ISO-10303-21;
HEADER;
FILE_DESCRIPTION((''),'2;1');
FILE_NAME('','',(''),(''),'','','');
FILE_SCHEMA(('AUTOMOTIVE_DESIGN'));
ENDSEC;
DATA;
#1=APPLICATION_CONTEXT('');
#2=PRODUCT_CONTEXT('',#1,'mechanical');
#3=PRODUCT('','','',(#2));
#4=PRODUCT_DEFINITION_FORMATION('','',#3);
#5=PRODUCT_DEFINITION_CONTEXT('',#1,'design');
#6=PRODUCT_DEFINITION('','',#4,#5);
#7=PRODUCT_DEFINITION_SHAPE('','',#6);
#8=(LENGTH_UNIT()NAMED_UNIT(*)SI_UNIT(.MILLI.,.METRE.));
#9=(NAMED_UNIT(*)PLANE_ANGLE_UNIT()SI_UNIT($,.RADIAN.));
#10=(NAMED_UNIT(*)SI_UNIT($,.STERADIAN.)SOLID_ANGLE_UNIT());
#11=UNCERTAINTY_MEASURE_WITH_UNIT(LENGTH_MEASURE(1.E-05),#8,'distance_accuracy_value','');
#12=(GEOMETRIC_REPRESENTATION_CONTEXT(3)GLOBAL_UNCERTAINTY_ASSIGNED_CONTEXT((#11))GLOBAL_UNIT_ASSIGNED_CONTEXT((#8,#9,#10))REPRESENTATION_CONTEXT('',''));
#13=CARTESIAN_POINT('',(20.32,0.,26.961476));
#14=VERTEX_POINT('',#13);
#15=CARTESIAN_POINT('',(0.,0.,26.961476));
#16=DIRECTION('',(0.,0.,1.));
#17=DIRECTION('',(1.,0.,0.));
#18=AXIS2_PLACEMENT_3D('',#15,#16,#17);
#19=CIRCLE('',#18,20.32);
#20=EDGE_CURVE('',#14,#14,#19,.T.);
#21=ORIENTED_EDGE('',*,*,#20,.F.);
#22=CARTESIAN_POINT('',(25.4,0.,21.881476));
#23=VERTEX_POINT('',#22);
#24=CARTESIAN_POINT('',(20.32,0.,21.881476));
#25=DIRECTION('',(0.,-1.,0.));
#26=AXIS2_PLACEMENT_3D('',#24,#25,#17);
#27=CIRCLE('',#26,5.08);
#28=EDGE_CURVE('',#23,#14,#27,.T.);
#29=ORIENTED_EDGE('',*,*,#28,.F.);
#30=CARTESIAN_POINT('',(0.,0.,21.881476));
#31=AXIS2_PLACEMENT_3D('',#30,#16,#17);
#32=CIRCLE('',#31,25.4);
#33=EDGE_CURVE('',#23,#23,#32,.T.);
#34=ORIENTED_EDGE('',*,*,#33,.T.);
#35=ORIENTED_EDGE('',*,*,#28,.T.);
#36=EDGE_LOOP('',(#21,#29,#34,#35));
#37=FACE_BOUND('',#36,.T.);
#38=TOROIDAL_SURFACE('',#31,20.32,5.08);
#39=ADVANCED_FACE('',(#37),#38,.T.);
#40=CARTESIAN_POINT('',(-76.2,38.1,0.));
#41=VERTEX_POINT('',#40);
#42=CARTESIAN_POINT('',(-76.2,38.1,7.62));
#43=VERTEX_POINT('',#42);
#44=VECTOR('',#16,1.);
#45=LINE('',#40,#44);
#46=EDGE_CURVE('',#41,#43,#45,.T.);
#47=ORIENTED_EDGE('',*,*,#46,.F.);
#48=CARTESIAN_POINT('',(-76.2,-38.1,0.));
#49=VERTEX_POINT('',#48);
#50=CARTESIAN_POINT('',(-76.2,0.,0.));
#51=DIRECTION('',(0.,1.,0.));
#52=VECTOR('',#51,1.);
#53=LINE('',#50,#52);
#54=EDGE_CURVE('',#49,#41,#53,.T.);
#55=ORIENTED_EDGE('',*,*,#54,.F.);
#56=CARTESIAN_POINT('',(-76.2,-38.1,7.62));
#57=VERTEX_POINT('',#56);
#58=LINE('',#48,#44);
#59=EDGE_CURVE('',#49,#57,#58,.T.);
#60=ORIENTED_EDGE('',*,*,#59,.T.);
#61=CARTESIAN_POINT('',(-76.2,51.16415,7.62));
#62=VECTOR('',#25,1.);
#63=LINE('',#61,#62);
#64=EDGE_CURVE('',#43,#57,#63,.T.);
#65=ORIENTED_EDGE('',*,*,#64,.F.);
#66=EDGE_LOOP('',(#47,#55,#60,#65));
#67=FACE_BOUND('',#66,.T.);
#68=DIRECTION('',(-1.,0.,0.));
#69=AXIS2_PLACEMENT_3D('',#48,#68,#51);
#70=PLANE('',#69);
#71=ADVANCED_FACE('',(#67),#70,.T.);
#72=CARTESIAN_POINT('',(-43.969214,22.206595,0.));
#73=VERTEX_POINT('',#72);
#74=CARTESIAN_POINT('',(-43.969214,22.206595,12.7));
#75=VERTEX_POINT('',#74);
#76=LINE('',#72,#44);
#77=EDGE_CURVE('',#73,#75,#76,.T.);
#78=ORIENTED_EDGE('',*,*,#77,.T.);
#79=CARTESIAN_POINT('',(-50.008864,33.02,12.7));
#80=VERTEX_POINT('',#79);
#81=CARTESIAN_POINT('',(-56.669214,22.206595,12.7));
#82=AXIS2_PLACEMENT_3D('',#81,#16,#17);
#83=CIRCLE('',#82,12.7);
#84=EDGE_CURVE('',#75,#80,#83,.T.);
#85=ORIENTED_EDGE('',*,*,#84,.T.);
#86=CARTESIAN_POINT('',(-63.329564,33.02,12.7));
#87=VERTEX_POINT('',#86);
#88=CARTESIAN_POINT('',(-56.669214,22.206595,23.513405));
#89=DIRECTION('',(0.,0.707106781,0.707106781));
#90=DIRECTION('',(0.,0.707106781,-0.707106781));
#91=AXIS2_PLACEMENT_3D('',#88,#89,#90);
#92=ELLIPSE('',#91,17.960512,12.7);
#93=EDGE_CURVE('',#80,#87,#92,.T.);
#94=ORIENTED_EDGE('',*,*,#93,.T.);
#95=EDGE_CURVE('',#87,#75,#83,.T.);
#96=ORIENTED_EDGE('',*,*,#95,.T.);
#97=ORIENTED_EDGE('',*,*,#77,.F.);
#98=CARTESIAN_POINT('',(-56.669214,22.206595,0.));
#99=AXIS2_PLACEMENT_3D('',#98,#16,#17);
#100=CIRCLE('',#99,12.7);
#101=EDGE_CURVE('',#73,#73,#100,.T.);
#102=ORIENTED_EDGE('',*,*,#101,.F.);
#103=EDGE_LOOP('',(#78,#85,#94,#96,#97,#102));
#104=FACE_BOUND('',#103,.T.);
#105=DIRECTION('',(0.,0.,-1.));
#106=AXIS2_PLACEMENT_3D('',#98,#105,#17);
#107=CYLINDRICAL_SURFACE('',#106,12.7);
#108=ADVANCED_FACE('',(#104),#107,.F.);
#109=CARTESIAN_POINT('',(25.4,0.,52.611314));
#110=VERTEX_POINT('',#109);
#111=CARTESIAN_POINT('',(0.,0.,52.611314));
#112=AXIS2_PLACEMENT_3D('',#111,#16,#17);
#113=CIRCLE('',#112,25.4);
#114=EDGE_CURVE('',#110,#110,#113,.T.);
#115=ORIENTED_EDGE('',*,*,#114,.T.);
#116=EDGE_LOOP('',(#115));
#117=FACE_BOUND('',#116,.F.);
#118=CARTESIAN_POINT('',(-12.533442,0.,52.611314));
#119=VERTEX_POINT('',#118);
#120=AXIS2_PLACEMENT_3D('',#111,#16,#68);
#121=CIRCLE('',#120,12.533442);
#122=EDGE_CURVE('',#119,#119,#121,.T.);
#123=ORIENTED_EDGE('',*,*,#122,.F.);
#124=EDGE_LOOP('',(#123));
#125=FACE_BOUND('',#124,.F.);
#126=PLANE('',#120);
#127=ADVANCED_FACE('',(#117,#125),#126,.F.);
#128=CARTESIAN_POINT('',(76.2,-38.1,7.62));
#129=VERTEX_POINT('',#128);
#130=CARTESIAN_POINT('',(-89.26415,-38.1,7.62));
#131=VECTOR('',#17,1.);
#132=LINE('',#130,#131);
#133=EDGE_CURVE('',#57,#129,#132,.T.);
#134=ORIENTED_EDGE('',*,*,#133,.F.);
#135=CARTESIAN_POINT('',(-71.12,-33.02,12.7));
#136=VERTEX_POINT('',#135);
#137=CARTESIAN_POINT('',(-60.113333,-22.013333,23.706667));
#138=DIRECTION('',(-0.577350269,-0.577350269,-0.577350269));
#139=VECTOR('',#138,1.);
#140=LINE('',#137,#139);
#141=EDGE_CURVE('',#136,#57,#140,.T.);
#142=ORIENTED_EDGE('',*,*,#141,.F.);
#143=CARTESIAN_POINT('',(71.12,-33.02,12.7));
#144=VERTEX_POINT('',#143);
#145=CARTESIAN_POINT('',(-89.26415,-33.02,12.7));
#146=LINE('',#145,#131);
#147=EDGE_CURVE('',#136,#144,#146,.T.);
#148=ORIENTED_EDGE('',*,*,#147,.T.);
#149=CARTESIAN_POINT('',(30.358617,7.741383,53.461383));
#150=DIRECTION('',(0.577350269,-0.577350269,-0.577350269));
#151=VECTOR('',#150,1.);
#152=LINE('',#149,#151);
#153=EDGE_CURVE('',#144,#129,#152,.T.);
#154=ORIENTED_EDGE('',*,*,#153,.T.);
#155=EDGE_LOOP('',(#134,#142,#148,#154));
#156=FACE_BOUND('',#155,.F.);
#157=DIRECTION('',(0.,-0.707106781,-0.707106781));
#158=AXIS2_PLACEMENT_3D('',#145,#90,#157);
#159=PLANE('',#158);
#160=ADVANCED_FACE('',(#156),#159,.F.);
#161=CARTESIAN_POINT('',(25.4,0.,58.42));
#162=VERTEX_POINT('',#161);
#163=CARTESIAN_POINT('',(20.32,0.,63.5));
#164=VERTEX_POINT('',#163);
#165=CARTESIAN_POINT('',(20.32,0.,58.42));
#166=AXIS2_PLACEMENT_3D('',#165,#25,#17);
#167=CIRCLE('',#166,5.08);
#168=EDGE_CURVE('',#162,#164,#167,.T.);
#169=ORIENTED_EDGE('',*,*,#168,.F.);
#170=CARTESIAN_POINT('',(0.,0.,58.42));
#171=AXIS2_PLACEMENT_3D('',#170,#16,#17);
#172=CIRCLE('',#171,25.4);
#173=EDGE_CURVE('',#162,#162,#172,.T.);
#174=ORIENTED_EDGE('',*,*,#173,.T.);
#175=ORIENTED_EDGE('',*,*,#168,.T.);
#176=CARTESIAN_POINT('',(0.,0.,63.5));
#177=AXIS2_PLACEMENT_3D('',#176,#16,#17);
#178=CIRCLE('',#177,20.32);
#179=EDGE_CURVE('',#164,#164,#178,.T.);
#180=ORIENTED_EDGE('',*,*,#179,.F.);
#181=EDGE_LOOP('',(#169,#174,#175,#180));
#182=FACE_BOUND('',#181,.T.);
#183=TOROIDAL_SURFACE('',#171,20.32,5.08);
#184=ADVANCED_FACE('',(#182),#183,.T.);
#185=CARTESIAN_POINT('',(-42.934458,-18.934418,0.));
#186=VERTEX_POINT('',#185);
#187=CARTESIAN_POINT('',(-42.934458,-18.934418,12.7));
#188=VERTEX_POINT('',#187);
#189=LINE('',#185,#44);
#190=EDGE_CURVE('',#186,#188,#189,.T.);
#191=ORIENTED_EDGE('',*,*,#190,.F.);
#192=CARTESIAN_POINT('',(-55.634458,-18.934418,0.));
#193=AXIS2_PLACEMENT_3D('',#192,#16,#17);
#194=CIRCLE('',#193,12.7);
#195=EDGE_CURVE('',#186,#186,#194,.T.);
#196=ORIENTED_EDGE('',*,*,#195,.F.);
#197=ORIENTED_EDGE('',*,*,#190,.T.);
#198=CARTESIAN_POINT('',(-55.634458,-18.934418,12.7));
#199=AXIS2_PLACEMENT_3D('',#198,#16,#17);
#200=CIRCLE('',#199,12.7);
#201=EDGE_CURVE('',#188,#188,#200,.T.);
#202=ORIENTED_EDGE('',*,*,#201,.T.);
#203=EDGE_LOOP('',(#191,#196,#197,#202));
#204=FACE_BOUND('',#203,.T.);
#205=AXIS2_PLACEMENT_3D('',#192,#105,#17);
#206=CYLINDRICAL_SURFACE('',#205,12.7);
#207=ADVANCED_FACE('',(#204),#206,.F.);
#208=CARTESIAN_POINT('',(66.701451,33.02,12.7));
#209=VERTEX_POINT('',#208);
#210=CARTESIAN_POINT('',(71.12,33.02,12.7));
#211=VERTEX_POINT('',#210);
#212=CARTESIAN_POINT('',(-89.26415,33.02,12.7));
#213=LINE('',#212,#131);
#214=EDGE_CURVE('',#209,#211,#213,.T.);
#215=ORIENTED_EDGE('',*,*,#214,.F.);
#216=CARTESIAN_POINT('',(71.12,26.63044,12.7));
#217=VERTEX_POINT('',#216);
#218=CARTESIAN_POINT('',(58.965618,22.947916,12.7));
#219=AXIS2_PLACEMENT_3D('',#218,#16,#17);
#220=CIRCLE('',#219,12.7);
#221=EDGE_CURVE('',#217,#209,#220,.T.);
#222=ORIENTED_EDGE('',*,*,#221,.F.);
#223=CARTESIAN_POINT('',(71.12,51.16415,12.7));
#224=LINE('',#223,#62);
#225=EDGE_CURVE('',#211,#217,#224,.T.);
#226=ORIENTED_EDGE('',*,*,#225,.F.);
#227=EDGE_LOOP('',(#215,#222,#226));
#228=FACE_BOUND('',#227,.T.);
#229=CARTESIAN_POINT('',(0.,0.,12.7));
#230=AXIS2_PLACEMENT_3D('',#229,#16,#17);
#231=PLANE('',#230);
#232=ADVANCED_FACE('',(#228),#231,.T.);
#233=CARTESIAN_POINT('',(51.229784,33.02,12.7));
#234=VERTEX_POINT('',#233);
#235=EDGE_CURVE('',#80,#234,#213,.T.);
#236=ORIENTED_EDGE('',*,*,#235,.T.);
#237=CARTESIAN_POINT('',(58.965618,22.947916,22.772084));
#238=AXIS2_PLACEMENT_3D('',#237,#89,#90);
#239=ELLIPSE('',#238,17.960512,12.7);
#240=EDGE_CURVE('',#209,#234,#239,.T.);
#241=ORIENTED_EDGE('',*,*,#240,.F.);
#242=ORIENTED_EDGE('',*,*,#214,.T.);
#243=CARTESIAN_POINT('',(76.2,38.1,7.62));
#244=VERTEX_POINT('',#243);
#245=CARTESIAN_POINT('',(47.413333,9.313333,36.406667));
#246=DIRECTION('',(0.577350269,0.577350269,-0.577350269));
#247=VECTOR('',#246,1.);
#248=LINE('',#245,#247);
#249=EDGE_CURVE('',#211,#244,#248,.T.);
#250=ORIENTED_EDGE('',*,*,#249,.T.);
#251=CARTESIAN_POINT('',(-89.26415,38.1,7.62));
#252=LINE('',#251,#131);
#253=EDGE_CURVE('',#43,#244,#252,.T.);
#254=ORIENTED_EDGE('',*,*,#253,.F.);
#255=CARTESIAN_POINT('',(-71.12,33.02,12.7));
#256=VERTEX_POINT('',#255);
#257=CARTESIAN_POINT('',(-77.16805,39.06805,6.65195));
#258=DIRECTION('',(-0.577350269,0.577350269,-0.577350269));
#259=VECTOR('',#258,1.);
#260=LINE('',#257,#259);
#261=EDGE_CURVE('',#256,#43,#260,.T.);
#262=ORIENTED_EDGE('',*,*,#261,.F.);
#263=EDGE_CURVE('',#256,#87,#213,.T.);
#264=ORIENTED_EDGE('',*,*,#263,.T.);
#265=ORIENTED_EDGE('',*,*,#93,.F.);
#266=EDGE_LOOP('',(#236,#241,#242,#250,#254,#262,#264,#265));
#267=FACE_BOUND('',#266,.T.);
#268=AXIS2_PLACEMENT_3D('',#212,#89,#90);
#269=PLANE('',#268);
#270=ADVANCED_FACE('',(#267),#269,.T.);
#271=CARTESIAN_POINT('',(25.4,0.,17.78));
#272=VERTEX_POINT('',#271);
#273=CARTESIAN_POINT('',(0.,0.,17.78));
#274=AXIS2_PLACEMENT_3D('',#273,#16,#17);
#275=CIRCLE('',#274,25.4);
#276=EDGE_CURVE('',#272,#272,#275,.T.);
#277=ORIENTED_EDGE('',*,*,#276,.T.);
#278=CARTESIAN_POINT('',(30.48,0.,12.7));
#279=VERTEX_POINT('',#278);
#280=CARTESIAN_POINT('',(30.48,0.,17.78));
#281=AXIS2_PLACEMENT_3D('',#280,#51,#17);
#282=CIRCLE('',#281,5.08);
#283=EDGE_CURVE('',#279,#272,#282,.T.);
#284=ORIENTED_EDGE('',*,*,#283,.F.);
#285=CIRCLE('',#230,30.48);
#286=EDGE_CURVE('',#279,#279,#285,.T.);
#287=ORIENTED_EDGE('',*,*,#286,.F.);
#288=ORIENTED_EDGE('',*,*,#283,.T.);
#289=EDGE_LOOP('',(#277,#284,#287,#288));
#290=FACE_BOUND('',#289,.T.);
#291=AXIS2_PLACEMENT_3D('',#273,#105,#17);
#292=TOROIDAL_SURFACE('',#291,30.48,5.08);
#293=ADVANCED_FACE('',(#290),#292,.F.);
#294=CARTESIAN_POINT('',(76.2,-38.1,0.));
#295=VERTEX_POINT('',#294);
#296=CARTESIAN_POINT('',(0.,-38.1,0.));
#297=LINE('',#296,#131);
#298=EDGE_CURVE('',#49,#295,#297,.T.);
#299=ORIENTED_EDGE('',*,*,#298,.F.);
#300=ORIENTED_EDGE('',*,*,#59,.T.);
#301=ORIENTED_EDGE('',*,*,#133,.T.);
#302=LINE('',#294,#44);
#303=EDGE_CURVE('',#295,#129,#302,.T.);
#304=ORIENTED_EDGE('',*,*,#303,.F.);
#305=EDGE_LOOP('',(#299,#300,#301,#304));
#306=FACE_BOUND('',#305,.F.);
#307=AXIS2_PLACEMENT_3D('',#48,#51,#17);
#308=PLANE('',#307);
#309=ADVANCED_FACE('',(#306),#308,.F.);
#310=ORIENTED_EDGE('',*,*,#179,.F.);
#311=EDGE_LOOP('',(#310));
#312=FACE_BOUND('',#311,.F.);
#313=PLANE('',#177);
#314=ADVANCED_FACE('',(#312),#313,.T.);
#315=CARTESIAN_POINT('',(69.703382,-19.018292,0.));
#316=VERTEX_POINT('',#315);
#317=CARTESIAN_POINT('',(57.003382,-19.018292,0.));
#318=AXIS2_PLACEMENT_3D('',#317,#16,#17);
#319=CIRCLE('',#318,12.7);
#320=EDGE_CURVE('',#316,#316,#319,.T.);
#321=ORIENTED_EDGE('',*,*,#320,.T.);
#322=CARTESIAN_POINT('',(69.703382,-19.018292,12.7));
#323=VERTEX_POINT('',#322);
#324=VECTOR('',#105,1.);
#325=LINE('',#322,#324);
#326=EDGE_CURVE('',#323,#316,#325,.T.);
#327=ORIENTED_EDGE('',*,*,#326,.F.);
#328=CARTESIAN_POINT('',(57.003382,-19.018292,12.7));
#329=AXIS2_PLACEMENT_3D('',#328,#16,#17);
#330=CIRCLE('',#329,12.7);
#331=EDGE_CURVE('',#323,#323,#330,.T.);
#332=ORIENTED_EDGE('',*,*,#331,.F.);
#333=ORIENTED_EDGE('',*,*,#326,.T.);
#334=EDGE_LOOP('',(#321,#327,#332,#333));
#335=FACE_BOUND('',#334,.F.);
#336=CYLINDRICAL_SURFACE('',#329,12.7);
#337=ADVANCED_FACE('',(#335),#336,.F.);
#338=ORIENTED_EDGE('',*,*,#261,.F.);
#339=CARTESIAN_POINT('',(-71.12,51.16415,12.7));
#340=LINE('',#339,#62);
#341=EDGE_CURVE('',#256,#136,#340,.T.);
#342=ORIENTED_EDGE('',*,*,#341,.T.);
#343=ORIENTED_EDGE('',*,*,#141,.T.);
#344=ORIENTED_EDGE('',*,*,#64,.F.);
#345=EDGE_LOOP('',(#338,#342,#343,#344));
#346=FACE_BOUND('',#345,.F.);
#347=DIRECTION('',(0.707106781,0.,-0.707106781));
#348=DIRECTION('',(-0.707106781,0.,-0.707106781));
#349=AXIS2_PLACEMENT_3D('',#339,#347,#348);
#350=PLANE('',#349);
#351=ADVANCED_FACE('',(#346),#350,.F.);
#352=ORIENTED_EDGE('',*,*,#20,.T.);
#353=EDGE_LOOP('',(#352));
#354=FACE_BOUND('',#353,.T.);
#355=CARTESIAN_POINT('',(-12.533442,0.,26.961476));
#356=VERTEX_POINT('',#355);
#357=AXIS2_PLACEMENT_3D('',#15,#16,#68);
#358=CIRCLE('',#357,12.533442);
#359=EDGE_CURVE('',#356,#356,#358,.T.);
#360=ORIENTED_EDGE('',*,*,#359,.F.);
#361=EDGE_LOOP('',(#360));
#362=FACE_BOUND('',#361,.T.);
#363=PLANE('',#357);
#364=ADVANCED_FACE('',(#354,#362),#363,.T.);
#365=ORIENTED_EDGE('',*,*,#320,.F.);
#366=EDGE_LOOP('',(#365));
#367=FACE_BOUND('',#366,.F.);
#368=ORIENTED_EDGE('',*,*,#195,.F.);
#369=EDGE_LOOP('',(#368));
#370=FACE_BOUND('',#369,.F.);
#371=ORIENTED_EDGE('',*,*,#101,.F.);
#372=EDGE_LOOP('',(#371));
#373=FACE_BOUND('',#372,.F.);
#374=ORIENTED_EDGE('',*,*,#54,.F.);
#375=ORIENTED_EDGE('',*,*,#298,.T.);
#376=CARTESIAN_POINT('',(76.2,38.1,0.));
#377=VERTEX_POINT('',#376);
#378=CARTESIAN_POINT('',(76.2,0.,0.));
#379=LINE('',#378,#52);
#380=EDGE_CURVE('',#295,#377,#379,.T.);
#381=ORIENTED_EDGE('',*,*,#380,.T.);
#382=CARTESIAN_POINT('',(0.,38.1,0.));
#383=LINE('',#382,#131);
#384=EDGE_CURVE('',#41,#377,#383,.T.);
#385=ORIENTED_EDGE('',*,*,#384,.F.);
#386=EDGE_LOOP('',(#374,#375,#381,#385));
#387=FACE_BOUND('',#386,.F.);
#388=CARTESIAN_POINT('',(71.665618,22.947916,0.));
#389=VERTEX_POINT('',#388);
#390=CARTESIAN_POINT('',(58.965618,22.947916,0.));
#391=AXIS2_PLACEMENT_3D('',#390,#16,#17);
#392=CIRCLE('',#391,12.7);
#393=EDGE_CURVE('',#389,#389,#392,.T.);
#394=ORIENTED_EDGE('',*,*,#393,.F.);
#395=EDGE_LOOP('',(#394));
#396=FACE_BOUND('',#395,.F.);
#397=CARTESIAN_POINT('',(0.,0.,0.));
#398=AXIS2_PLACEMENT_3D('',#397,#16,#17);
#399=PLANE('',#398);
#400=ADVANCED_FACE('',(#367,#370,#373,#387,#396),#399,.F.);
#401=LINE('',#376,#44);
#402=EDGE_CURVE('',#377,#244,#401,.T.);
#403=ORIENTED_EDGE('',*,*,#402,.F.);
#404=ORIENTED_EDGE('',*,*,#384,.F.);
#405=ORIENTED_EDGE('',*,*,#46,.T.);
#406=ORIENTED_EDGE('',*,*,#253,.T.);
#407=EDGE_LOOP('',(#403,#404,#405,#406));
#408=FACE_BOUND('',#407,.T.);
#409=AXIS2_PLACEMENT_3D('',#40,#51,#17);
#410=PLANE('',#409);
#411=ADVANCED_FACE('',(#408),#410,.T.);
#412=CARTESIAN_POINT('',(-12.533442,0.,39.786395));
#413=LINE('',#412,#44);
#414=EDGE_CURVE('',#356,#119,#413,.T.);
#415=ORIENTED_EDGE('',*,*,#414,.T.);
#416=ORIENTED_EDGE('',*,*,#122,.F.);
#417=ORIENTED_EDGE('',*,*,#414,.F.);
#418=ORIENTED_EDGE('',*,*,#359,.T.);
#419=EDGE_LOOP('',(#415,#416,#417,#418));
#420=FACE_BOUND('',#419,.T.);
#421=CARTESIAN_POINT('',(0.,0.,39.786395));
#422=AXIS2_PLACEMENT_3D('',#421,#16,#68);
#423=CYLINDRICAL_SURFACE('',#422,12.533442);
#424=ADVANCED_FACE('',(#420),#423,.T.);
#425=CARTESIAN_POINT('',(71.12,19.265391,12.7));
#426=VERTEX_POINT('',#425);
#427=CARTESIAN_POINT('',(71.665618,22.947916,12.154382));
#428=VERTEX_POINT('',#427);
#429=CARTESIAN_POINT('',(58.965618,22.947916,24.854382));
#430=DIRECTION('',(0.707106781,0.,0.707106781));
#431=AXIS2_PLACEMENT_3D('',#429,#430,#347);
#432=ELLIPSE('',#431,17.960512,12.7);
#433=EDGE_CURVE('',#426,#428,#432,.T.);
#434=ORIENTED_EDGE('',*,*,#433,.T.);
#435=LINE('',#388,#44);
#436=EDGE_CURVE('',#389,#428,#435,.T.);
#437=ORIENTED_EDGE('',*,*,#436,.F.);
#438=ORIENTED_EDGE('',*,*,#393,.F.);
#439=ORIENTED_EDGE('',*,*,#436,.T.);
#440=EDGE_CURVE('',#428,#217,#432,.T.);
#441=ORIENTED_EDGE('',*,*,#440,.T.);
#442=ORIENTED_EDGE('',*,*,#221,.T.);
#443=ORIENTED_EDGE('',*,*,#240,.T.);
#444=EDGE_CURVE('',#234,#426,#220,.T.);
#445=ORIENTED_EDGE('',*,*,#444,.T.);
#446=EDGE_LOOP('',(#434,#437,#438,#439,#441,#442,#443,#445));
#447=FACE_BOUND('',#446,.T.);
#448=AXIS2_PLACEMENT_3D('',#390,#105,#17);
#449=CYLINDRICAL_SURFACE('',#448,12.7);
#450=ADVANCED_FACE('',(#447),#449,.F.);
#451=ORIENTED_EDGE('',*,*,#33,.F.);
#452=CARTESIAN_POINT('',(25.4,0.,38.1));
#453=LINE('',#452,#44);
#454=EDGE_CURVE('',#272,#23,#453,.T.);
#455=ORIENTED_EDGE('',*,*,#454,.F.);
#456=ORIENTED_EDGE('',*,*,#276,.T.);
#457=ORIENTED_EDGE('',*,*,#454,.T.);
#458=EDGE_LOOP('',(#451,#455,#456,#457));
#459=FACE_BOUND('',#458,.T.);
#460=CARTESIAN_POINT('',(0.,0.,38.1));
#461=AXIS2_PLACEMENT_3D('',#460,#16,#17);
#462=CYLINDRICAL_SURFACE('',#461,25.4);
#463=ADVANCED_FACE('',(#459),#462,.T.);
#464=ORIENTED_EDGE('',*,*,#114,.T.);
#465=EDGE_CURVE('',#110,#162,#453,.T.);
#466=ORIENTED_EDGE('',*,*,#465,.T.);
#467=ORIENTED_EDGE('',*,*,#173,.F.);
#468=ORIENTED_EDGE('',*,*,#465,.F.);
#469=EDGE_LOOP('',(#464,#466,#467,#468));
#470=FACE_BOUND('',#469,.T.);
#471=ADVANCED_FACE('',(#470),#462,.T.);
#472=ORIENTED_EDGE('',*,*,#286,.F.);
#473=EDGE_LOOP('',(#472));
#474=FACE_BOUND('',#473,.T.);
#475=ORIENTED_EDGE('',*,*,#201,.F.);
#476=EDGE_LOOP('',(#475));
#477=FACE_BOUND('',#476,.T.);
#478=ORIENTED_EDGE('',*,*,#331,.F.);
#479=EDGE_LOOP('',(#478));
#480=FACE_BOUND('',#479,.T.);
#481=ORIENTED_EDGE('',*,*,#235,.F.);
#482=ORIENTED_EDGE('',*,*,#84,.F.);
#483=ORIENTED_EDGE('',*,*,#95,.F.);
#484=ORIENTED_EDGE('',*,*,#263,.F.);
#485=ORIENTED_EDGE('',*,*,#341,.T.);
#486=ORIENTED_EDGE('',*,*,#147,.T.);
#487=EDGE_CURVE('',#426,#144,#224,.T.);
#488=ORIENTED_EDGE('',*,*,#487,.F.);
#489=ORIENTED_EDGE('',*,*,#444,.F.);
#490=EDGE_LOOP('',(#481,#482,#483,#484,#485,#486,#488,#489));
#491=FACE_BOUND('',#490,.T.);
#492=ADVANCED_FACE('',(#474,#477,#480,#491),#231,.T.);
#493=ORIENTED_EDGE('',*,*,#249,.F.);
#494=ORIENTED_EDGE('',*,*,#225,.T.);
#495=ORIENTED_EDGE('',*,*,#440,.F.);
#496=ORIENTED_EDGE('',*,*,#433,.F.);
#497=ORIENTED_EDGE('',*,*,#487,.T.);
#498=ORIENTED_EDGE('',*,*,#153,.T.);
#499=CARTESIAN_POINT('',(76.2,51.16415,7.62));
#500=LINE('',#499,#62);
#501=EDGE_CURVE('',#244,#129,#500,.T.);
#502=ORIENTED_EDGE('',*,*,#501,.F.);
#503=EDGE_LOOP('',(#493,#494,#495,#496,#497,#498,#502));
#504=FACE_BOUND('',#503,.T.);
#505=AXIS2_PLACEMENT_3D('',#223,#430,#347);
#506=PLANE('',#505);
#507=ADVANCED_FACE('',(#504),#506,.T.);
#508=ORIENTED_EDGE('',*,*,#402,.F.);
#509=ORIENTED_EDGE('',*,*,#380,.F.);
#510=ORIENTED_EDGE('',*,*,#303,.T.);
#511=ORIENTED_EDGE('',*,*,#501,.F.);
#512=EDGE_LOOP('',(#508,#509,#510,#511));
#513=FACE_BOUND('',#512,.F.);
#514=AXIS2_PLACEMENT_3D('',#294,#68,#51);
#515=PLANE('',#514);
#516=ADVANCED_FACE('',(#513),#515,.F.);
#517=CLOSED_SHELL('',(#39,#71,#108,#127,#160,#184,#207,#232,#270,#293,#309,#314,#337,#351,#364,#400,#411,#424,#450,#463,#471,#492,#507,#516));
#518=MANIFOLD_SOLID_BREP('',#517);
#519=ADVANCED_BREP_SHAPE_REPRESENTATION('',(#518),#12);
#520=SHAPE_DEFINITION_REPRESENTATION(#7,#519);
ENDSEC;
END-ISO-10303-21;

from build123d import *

# Parameters (mm, degrees)
F0_W         = 152.4
F0_H         = 76.2
F1_DEPTH     = 12.7
F2_R         = 12.7
F3_DEPTH     = 12.7
F4_R         = 12.7
F5_DEPTH     = 12.7
F6_R         = 12.7
F7_DEPTH     = 12.7
F8_W         = 25.4
F8_H         = 50.8
F11_W        = 22.735084407
F11_H        = 25.6498381495
F13_R        = 5.08
F14_T1_DEPTH = 178.5282991577
F14_T3_DEPTH = 102.3282991577


# Not quite as in the source:
# - a fillet or chamfer that OpenCascade refuses, or shapes differently, is made with other operations: its cross-section is extruded or revolved along the edge and cut away or added


with BuildPart() as f1:
    # F0 (on Top) → F1 (new body)
    with BuildSketch(Plane.XY):
        Rectangle(F0_W, F0_H)
    extrude(amount=F1_DEPTH)

    # F2 (on face) → F3 (cut)
    with BuildSketch(Plane.XY.offset(12.7)):
        with Locations((57.0033815651, -19.0182915657)):
            Circle(F2_R)
    extrude(amount=-F3_DEPTH, mode=Mode.SUBTRACT)

    # F4 (on Top) → F5 (cut)
    with BuildSketch(Plane.XY):
        with Locations((-55.634457748, -18.9344183354)):
            Circle(F4_R)
    extrude(amount=F5_DEPTH, mode=Mode.SUBTRACT)

    # F6 (on Top) → F7 (cut)
    with BuildSketch(Plane.XY):
        with Locations((-56.6692140824, 22.2065947787)):
            Circle(F6_R)
        with Locations((58.9656175097, 22.9479158466)):
            Circle(F6_R)
    extrude(amount=F7_DEPTH, mode=Mode.SUBTRACT)

    # F8 (on Front) → F9 (revolve)
    with BuildSketch(Plane.XZ):
        with Locations((12.7, 38.1)):
            Rectangle(F8_W, F8_H)
    revolve(axis=Axis((0, 0, 38.1), (0, 0, 1)))

    # F11 (on Front) → F12 (revolve, cut)
    with BuildSketch(Plane.XZ):
        with Locations((-23.9009843208, 39.7863946855)):
            Rectangle(F11_W, F11_H)
    revolve(axis=Axis((0, 0, 31.6979512572), (0, 0, 1)), mode=Mode.SUBTRACT)

    # F13
    f13_edges = [f1.edges().sort_by_distance(p)[0] for p in [
        (-25.4, 0, 63.5),
        (-25.4, 0, 26.961476),
        (-25.4, 0, 12.7),
    ]]
    fillet(f13_edges, radius=F13_R)

    # F14: chamfer of 5.08 on 4 edges, made by hand

    # F14_s2 → F14_t1 (cut)
    with BuildSketch(Plane.YZ.offset(-89.2641495789)):
        Polygon((-33.02, 12.7), (-38.1, 7.62), (-38.1, 12.7), align=None)
        Polygon((33.02, 12.7), (38.1, 7.62), (38.1, 12.7), align=None)
    extrude(amount=F14_T1_DEPTH, mode=Mode.SUBTRACT)

    # F14_s4 → F14_t3 (cut)
    with BuildSketch(Plane.XZ.offset(-51.1641495789)):
        Polygon((-71.12, 12.7), (-76.2, 7.62), (-76.2, 12.7), align=None)
        Polygon((71.12, 12.7), (76.2, 7.62), (76.2, 12.7), align=None)
    extrude(amount=F14_T3_DEPTH, mode=Mode.SUBTRACT)


solid = f1.part
